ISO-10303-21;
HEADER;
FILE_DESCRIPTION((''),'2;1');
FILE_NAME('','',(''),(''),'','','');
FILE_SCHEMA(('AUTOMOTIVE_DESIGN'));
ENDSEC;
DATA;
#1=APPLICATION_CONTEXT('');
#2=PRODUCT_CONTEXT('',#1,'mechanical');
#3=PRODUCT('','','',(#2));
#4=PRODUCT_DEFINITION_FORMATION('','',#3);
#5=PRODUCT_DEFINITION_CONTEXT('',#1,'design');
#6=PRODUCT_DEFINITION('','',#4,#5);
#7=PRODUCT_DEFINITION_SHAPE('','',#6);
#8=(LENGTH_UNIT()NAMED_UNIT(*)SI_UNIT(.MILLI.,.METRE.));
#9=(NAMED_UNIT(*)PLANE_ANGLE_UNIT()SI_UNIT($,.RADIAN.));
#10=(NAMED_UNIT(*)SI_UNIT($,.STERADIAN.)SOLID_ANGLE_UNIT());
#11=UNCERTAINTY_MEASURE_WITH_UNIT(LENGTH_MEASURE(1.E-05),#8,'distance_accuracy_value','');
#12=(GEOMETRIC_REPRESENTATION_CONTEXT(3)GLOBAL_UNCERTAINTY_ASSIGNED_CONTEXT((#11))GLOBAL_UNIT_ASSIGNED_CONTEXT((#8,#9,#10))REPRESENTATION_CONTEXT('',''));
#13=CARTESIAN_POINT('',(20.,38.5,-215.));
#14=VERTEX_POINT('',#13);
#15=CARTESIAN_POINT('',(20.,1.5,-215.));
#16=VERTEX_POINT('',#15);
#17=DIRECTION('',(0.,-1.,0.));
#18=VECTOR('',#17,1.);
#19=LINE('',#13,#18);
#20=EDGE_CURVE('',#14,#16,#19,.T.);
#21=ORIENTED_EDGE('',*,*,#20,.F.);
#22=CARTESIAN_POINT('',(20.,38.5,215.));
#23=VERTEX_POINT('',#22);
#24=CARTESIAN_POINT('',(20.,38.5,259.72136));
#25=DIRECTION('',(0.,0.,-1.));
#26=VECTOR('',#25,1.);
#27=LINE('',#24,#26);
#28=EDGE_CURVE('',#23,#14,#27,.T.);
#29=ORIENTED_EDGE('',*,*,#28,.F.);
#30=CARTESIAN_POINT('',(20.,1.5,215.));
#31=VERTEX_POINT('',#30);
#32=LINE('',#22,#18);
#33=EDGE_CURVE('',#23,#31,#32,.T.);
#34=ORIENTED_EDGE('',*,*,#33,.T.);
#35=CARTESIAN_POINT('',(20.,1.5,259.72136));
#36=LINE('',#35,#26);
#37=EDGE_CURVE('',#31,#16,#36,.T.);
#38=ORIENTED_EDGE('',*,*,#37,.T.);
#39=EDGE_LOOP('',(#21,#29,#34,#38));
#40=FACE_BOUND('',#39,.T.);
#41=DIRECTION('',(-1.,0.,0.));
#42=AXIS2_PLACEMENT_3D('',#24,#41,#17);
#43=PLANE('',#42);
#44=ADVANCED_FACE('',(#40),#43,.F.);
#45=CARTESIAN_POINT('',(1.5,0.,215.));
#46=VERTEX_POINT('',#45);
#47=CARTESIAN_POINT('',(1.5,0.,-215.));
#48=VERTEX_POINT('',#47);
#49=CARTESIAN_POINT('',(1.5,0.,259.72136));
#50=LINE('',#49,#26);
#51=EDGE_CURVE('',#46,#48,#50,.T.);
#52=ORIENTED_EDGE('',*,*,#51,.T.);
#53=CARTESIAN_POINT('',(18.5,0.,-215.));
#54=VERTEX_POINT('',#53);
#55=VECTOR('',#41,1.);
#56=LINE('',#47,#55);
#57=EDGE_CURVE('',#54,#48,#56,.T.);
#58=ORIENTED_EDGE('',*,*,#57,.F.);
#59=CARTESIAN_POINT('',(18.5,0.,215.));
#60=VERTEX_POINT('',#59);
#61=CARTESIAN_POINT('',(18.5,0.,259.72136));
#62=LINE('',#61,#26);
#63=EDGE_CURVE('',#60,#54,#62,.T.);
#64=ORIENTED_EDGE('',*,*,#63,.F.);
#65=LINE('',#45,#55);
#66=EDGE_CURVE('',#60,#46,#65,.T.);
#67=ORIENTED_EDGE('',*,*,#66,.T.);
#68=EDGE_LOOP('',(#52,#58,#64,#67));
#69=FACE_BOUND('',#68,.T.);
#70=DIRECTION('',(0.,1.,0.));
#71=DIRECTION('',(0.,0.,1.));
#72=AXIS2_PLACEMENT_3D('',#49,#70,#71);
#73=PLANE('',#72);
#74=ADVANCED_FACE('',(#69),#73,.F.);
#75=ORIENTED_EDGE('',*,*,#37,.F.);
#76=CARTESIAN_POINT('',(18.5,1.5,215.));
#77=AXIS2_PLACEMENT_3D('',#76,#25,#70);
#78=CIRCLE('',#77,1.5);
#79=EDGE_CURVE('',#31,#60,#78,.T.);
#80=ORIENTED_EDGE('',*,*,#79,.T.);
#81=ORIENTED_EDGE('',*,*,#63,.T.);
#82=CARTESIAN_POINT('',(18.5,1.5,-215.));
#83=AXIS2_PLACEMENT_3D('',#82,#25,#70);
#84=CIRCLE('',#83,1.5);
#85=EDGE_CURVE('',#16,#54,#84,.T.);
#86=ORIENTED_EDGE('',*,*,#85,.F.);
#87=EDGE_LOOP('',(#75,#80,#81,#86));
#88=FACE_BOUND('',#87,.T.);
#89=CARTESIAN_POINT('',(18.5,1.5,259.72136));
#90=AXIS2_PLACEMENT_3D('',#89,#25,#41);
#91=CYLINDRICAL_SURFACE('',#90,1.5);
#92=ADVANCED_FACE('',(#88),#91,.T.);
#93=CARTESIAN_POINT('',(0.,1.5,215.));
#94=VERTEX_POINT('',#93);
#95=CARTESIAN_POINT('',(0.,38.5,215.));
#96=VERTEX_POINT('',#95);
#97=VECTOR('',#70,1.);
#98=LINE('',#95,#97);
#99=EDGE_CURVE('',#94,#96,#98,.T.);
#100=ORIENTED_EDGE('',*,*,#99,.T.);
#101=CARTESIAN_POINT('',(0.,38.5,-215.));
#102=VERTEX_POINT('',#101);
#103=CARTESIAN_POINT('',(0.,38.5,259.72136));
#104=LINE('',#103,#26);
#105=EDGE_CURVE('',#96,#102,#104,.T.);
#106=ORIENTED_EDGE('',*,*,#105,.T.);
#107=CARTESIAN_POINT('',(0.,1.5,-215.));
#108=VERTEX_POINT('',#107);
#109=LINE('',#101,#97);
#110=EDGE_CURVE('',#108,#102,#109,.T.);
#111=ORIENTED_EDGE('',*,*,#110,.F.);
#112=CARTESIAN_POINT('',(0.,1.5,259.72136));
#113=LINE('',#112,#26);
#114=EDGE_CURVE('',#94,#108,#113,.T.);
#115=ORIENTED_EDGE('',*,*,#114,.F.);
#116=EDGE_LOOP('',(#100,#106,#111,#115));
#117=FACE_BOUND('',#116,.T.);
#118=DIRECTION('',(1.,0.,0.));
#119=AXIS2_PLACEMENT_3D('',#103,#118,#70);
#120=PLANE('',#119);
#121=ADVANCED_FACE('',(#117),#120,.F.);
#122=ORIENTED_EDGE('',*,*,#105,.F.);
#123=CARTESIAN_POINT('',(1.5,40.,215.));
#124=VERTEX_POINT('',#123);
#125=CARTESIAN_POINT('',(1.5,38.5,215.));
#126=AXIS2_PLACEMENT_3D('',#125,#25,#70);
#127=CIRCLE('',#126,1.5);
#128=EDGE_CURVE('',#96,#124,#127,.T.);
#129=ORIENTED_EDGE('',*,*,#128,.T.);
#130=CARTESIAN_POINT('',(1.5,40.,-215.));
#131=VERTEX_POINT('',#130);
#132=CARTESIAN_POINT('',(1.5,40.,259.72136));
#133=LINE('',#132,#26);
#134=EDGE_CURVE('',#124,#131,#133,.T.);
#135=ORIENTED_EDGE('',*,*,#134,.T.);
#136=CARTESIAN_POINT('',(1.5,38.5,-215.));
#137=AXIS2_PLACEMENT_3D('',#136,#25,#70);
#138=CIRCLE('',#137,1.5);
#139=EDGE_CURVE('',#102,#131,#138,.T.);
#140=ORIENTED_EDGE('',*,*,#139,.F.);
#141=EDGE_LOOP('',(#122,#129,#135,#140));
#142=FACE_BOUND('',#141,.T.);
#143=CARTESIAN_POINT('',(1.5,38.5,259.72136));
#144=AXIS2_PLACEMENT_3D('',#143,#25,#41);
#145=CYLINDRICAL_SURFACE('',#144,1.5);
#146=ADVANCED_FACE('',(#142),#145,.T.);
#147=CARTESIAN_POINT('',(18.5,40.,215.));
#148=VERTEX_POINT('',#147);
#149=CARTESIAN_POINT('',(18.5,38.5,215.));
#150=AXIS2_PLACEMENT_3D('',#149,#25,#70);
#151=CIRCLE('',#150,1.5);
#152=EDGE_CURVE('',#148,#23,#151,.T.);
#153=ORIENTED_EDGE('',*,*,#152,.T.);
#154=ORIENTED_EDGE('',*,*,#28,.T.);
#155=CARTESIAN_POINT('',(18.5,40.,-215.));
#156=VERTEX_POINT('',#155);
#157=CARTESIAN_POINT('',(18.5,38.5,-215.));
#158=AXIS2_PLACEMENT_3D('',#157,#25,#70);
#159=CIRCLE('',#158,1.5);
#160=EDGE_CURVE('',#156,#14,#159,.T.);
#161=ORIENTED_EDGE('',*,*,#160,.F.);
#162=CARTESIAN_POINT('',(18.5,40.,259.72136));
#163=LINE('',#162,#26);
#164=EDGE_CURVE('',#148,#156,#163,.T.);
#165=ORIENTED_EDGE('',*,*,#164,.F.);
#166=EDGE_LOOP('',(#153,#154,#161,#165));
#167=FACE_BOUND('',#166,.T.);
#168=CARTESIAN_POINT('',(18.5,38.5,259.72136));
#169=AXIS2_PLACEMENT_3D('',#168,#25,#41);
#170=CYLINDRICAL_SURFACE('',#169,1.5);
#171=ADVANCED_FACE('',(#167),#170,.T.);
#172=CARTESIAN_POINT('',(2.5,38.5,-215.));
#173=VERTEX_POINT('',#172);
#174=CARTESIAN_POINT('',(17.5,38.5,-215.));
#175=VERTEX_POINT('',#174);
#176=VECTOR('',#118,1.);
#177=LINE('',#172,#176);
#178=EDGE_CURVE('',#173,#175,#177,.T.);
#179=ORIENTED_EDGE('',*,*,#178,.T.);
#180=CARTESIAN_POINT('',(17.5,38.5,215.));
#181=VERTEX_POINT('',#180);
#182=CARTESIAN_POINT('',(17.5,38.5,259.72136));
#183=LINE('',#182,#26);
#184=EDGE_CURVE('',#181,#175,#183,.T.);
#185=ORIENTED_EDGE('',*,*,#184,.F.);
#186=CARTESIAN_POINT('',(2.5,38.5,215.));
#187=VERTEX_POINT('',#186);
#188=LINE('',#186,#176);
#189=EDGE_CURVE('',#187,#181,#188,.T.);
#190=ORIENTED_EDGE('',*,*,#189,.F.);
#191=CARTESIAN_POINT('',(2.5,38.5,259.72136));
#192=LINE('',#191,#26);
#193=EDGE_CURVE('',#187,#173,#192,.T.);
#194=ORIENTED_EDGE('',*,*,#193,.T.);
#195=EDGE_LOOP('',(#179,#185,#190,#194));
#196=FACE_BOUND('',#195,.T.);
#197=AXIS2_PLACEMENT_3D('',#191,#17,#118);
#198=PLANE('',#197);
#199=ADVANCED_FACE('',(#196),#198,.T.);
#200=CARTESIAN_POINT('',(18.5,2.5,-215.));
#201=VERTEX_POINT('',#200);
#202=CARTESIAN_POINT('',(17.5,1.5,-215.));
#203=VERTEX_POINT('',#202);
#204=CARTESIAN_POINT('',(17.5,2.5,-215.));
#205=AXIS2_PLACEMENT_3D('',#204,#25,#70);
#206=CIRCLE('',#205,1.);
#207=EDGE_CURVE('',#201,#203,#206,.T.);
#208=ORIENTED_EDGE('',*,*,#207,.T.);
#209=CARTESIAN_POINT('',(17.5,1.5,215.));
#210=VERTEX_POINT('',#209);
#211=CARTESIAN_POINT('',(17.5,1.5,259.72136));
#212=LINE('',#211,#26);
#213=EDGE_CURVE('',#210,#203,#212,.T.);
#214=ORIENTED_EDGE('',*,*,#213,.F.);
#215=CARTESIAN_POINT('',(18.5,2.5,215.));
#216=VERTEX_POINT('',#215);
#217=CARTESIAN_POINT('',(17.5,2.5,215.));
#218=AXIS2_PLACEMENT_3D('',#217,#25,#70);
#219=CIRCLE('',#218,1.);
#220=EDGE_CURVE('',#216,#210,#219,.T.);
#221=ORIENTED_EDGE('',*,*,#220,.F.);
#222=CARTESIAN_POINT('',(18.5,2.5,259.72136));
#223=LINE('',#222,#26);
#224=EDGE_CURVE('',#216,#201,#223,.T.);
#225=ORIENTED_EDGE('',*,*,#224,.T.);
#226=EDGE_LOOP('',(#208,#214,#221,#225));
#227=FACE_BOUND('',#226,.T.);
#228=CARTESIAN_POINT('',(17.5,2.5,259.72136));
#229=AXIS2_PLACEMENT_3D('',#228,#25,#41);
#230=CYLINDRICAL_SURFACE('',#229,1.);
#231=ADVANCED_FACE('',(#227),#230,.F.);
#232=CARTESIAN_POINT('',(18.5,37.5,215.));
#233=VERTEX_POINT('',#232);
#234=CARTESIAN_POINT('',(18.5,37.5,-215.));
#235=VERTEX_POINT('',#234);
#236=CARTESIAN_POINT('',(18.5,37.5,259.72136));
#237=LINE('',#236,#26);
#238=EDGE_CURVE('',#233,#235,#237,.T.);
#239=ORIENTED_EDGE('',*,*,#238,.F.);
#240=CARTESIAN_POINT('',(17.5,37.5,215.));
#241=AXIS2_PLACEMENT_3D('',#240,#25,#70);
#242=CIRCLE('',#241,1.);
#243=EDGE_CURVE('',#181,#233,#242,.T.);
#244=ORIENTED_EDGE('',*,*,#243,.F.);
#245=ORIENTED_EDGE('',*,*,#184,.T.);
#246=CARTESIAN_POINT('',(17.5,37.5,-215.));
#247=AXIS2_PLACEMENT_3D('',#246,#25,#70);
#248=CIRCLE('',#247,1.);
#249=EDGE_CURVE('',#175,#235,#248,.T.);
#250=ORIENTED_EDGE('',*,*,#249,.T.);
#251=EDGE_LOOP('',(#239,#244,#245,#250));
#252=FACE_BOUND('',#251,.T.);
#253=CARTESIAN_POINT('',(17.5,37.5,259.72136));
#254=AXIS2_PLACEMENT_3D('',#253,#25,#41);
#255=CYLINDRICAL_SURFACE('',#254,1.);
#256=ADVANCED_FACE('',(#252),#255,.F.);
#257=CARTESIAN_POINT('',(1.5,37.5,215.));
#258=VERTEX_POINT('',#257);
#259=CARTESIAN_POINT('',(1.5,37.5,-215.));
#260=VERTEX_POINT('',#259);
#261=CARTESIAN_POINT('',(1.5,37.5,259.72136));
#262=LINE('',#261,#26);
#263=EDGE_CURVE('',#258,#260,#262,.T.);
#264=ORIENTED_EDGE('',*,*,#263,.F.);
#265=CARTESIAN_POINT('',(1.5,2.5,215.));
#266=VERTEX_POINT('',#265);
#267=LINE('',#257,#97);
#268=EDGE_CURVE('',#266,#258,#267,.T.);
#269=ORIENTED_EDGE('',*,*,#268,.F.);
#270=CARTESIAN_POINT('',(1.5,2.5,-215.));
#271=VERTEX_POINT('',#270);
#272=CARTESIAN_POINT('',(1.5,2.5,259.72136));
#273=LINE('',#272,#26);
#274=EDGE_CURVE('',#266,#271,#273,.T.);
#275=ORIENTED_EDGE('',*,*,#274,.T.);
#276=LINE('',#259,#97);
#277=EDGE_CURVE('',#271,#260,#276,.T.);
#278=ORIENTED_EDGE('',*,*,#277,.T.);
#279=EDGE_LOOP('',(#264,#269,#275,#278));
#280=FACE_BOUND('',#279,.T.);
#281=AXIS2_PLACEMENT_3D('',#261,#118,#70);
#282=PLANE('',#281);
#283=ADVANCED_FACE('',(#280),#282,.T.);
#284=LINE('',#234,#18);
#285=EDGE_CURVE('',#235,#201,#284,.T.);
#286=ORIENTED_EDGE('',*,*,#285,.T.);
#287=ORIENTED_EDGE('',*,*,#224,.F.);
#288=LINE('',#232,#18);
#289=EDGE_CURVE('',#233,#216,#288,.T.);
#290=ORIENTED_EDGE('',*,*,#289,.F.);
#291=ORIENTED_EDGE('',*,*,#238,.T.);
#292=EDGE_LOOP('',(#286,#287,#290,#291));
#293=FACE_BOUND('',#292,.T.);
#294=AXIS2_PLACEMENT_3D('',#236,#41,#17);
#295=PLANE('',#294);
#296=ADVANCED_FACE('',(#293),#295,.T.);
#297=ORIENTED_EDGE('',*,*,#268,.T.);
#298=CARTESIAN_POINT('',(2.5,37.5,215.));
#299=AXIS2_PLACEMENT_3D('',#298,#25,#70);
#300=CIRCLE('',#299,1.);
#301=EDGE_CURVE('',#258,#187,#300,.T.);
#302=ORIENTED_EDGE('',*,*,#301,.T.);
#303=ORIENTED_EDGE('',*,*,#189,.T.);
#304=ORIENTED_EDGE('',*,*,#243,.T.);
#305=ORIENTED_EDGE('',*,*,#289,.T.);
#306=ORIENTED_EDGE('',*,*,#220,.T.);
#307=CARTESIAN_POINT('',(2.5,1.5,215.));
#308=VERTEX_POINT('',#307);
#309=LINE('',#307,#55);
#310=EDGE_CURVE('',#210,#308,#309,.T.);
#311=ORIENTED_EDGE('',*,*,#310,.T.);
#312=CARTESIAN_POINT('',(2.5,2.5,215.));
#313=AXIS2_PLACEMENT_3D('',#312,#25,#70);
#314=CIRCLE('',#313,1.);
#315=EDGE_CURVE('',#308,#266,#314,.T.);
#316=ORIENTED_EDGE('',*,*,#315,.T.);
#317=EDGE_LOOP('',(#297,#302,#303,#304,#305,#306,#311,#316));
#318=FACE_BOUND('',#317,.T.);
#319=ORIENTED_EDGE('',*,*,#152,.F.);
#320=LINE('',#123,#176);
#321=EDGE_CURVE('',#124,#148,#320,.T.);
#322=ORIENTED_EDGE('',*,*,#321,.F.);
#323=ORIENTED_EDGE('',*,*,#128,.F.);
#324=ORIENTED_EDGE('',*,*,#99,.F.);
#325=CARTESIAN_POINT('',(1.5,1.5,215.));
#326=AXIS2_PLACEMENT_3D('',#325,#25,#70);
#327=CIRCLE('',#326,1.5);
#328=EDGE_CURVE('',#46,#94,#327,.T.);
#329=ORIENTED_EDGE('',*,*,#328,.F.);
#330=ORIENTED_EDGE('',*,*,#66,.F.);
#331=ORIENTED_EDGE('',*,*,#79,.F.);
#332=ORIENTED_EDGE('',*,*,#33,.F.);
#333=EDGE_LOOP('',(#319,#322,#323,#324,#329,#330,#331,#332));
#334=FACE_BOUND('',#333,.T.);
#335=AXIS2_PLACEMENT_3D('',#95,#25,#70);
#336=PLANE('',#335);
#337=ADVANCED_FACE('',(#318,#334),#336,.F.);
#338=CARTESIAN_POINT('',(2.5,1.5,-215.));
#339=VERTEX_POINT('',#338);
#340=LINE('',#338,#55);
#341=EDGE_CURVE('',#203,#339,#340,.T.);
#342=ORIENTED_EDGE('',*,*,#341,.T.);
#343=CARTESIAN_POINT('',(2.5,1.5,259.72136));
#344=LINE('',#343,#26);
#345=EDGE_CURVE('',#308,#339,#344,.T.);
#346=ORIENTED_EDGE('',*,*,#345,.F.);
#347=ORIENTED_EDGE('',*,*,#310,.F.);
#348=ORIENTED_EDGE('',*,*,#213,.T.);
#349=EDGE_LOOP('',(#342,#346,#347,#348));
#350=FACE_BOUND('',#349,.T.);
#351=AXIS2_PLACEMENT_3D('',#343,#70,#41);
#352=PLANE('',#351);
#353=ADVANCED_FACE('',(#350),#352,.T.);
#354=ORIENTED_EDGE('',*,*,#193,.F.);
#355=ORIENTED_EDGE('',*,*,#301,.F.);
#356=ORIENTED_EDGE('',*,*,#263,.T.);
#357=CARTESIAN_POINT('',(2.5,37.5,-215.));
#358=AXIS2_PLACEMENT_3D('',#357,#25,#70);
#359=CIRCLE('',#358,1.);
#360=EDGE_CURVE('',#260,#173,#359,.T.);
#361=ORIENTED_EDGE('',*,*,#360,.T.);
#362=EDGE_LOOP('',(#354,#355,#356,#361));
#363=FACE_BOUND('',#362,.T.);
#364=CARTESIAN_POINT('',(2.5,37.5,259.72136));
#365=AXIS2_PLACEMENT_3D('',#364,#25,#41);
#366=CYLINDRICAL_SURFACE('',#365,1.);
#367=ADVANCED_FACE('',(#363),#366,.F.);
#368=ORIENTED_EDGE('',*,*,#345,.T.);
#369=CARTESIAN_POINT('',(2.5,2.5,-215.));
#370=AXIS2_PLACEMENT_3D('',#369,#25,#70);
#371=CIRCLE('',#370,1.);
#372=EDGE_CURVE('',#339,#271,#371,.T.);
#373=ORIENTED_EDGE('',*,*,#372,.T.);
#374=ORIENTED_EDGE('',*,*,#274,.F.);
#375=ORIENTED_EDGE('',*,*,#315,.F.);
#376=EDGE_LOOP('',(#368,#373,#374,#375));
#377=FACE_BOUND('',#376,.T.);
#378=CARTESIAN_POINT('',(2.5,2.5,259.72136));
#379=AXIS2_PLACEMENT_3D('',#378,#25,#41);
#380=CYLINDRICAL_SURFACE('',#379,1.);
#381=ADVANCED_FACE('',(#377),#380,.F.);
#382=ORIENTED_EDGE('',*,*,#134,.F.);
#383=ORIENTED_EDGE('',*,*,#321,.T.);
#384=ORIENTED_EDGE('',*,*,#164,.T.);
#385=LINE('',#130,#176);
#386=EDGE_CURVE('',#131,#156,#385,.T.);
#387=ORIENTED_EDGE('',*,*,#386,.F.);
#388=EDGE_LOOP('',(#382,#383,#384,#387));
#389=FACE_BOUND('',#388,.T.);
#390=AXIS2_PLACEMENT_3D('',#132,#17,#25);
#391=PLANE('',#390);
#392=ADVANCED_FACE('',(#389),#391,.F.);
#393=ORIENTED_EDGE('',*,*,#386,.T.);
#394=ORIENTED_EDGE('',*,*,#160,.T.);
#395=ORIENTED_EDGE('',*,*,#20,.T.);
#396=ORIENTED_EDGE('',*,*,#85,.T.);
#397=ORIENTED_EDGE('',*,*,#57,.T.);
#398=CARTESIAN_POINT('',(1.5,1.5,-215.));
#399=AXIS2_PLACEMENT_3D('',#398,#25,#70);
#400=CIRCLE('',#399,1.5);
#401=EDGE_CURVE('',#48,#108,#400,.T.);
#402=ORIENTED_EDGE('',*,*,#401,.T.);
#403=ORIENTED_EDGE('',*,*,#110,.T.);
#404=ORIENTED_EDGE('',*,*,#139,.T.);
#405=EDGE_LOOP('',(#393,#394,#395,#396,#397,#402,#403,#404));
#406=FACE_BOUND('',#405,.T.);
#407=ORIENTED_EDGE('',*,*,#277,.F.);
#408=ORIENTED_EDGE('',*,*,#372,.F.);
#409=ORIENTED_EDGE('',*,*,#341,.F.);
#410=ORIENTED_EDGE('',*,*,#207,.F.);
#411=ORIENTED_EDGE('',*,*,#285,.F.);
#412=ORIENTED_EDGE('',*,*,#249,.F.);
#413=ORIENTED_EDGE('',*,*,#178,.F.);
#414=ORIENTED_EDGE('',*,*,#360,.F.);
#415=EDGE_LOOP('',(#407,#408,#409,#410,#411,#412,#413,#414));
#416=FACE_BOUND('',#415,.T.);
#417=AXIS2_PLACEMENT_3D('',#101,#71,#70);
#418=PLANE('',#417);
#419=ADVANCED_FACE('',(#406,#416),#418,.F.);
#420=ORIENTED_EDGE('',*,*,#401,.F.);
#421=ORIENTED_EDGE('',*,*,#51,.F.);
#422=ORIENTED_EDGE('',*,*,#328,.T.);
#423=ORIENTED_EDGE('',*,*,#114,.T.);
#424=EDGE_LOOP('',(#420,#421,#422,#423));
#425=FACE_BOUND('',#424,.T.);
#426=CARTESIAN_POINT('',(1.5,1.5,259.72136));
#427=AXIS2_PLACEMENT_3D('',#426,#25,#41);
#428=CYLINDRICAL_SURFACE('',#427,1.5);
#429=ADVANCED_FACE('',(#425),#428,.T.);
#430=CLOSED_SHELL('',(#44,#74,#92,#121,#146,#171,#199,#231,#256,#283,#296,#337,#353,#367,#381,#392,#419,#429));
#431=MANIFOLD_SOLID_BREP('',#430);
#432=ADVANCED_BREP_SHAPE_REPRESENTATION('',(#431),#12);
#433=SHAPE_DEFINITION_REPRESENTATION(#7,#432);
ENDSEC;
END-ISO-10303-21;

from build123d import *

# Parameters (mm, degrees)
EXTRUDE_1_DEPTH = 215


# Read off the part's stored shape, not the designer's step: Бобышка-Вытянуть1
with BuildPart() as part:
    # Бобышка-Вытянуть1 outline → Бобышка-Вытянуть1 (new body)
    with BuildSketch(Plane.XY):
        with BuildLine():
            ThreePointArc((20, 38.5), (19.560660172, 39.560660172), (18.5, 40))
            Line((18.5, 40), (1.5, 40))
            ThreePointArc((1.5, 40), (0.439339828, 39.560660172), (0, 38.5))
            Line((0, 38.5), (0, 1.5))
            ThreePointArc((0, 1.5), (0.439339828, 0.439339828), (1.5, 0))
            Line((1.5, 0), (18.5, 0))
            ThreePointArc((18.5, 0), (19.560660172, 0.439339828), (20, 1.5))
            Line((20, 1.5), (20, 38.5))
        make_face()
        with BuildLine():
            Line((18.5, 37.5), (18.5, 2.5))
            ThreePointArc((18.5, 2.5), (18.207106781, 1.792893219), (17.5, 1.5))
            Line((17.5, 1.5), (2.5, 1.5))
            ThreePointArc((2.5, 1.5), (1.792893219, 1.792893219), (1.5, 2.5))
            Line((1.5, 2.5), (1.5, 37.5))
            ThreePointArc((1.5, 37.5), (1.792893219, 38.207106781), (2.5, 38.5))
            Line((2.5, 38.5), (17.5, 38.5))
            ThreePointArc((17.5, 38.5), (18.207106781, 38.207106781), (18.5, 37.5))
        make_face(mode=Mode.SUBTRACT)
    extrude(amount=EXTRUDE_1_DEPTH)

    # Зеркальное отражение2: part across plane


with BuildPart() as part_1:
    add(part.part)
    add(part.part.mirror(Plane(origin=(18.5, 38.5, 0), x_dir=(1, 0, 0), z_dir=(0, 0, -1))))


solid = part_1.part
